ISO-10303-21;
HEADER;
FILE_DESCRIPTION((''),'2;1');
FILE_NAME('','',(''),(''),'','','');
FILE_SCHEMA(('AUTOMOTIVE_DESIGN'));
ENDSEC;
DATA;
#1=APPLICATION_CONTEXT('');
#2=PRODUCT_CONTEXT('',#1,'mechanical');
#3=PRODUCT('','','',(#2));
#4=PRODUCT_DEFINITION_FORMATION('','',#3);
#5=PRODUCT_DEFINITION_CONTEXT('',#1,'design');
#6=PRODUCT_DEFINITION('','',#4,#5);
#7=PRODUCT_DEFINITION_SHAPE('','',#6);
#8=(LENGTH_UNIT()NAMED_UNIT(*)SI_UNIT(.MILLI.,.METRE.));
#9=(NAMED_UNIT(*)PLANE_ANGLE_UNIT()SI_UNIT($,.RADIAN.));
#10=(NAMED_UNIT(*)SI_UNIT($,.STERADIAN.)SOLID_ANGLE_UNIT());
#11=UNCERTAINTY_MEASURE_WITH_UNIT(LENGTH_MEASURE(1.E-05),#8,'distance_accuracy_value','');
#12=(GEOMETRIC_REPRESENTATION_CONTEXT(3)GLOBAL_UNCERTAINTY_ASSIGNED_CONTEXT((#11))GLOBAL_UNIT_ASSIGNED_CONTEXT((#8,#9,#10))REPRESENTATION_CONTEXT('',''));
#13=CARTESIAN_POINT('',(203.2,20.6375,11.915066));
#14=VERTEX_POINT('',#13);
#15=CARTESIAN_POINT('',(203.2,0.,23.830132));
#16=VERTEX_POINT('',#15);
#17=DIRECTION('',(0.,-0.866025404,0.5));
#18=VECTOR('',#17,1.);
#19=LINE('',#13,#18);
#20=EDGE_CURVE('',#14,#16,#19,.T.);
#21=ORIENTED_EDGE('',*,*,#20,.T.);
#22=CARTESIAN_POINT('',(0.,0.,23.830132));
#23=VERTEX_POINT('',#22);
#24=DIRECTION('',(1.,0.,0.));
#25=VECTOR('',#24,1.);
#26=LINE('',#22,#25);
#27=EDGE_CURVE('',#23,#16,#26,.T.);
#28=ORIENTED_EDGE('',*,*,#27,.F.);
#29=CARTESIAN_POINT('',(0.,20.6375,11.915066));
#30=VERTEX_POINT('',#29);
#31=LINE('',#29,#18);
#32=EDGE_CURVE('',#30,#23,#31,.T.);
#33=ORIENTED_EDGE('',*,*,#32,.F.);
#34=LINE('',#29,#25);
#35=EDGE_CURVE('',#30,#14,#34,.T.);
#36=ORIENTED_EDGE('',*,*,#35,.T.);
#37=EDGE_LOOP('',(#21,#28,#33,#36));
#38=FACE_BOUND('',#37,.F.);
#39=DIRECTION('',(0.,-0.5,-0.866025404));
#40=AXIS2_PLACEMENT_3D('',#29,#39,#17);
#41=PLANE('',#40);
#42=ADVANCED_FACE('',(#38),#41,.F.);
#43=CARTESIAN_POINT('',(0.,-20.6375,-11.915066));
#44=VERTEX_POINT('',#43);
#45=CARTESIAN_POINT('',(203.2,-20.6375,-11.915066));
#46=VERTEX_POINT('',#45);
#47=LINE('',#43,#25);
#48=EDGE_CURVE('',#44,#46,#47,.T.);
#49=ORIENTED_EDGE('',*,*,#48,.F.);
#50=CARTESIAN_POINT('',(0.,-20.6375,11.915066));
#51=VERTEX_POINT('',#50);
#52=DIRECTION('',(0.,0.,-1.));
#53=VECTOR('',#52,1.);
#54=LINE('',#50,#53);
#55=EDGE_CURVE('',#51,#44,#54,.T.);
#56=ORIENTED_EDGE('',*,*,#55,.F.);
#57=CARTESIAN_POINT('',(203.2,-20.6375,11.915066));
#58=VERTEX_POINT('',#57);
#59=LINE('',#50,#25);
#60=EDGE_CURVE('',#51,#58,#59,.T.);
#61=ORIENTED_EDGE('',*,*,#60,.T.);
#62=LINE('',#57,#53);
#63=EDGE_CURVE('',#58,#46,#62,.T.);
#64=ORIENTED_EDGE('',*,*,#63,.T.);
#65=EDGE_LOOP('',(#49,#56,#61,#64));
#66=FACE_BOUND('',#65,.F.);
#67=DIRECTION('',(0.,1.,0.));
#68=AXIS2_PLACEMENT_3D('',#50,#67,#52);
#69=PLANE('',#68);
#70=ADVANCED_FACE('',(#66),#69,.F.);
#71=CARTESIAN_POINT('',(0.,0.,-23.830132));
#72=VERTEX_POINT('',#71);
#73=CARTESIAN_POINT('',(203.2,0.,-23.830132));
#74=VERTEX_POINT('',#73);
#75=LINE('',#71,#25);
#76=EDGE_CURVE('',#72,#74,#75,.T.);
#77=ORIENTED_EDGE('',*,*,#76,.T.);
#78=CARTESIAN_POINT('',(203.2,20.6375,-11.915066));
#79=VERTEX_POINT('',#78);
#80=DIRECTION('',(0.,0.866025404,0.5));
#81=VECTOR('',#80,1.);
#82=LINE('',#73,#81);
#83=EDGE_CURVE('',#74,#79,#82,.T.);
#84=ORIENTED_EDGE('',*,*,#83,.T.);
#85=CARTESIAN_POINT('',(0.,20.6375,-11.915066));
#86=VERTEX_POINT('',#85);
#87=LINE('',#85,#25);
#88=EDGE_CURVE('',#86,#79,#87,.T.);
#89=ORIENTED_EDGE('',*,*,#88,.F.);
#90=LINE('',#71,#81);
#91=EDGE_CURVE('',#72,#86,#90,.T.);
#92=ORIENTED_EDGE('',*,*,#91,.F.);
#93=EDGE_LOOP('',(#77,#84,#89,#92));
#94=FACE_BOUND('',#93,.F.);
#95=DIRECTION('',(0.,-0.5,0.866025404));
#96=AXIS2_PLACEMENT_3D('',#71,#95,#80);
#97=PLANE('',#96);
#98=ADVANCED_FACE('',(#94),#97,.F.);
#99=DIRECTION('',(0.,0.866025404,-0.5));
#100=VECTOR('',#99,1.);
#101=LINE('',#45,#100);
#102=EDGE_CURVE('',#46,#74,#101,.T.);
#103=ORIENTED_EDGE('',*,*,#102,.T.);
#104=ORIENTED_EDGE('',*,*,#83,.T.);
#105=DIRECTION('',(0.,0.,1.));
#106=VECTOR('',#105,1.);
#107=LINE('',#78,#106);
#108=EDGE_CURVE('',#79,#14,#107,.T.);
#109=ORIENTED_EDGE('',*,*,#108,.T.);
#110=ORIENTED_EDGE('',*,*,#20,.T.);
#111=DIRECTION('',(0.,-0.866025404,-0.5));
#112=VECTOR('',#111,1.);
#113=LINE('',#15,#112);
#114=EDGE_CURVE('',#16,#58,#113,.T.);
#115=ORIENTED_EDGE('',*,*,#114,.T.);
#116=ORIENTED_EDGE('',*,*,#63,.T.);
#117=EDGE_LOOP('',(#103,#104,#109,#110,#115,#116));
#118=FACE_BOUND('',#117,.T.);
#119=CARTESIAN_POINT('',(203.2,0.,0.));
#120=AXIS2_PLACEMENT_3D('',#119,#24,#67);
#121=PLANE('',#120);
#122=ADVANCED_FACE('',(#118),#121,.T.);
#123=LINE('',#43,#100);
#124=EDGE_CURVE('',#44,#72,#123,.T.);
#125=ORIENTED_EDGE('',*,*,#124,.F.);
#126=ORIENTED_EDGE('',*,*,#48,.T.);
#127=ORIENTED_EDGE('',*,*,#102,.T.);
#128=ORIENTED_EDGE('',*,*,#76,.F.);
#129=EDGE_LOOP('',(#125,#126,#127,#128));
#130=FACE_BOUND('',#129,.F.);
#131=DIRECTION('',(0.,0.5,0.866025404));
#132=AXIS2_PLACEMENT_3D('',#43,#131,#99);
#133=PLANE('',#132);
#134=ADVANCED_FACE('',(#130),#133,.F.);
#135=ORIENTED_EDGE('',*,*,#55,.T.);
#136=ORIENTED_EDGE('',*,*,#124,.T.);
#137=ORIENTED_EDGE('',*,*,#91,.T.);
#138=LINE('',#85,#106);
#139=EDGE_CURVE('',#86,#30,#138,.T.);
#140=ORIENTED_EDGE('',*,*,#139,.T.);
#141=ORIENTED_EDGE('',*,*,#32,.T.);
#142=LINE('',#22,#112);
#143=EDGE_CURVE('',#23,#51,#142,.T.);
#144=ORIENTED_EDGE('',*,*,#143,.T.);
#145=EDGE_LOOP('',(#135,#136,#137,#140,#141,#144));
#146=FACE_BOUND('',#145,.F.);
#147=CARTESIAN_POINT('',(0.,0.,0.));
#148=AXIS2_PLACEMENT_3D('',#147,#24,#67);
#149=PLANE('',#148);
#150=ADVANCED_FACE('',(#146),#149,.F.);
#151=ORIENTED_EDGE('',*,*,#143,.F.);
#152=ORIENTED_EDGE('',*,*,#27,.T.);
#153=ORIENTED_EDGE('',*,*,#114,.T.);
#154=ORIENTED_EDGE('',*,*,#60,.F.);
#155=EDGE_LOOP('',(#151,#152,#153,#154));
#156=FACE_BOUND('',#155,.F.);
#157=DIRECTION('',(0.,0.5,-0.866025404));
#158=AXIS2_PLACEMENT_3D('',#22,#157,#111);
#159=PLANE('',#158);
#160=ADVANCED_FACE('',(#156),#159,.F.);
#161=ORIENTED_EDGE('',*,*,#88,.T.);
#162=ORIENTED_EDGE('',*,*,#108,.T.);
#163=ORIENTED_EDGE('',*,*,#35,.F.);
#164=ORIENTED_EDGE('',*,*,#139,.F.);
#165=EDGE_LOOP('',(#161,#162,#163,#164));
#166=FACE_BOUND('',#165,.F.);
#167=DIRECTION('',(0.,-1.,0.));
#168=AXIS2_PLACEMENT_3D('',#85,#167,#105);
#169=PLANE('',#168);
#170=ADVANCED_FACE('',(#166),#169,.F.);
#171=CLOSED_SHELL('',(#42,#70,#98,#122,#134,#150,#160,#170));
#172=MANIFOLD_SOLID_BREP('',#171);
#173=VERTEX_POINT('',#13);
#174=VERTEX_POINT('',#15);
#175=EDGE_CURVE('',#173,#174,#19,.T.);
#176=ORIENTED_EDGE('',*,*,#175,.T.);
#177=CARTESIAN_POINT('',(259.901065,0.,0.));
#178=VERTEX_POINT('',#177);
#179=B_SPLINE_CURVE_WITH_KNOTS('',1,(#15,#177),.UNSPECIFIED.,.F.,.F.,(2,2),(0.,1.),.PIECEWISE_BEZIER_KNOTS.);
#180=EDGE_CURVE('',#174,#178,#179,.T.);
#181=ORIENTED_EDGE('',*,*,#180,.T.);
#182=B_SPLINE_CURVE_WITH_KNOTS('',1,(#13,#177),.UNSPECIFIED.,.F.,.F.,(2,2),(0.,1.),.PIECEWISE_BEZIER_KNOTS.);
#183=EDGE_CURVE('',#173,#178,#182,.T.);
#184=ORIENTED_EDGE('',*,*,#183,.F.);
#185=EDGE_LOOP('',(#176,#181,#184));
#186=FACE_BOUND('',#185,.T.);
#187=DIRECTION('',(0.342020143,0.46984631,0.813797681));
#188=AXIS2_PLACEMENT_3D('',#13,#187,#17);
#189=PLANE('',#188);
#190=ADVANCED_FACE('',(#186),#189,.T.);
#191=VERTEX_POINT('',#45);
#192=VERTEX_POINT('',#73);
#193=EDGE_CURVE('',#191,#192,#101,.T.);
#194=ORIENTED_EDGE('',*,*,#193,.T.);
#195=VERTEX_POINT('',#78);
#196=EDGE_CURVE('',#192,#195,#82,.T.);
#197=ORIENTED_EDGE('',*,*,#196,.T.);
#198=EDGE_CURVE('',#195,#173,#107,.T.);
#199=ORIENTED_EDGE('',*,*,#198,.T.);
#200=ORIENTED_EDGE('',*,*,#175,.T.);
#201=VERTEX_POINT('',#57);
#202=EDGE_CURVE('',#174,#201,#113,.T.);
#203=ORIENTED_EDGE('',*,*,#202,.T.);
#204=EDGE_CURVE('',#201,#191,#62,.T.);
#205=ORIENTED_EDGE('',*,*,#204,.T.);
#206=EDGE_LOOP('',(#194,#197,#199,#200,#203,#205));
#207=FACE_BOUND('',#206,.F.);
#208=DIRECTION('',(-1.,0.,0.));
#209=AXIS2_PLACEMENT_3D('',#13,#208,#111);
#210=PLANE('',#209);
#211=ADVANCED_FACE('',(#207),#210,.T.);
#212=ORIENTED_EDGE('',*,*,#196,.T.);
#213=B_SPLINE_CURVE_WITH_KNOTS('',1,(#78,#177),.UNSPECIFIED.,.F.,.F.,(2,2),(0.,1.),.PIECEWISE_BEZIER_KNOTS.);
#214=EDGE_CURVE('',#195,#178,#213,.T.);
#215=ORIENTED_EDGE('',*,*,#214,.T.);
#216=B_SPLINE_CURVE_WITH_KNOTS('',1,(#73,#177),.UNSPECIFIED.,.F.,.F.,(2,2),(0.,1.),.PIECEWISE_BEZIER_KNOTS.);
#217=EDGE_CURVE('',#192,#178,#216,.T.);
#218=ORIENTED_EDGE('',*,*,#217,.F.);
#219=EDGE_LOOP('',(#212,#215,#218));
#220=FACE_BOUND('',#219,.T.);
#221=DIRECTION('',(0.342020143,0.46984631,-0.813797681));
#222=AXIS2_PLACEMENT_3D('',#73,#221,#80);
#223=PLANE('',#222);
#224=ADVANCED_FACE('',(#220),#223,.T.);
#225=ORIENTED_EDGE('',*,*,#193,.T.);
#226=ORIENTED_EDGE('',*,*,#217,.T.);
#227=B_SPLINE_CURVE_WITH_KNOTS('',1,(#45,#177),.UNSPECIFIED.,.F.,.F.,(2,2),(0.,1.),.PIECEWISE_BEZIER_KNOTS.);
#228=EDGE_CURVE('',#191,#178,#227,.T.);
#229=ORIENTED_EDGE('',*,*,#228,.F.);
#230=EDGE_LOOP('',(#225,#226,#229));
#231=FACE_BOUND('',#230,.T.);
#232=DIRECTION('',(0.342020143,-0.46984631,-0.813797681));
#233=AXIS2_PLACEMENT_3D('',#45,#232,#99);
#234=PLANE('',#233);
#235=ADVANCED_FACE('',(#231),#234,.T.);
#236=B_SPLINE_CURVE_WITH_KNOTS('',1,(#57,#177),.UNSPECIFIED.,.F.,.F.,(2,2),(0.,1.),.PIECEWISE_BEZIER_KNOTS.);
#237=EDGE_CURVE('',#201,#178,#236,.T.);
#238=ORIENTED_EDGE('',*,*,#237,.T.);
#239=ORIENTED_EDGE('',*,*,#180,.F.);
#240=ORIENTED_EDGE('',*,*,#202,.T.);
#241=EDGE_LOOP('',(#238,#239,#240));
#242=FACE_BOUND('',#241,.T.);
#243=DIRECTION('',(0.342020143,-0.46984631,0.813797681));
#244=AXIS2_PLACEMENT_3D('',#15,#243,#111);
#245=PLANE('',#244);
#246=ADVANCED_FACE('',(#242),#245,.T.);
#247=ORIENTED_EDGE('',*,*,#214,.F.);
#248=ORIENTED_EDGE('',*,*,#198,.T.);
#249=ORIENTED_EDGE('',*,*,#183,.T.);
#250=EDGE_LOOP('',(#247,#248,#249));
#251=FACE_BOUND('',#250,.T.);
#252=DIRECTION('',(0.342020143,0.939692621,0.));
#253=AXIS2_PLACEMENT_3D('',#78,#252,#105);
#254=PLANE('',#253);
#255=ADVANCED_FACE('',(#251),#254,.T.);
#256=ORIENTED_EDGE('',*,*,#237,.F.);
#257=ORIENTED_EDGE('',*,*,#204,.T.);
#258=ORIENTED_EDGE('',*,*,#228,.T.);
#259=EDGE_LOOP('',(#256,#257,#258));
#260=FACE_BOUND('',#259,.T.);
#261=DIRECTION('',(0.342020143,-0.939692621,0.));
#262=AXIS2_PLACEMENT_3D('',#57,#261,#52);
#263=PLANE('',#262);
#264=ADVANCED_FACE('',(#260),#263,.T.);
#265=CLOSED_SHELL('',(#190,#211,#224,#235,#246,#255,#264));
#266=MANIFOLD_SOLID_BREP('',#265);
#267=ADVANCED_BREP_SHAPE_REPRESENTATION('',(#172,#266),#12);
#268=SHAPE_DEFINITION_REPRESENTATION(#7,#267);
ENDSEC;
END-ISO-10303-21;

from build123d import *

# Parameters (mm, degrees)
F1_DEPTH = 203.2


# Not quite as in the source:
# - an extrude whose draft closes it to a point is written as a loft to that point


with BuildPart() as f1:
    # F0 (on Right) → F1 (new body)
    with BuildSketch(Plane.YZ):
        Polygon((20.6375, 11.9150661804), (0, 23.8301323608), (-20.6375, 11.9150661804), (-20.6375, -11.9150661804), (0, -23.8301323608), (20.6375, -11.9150661804), align=None)
    extrude(amount=F1_DEPTH)


with BuildPart() as f3:
    # F2 (on face) → F3 section 0
    with BuildSketch(Plane.YZ.offset(203.2), mode=Mode.PRIVATE) as f3_s0:
        Polygon((20.6375, 11.9150661804), (0, 23.8301323608), (-20.6375, 11.9150661804), (-20.6375, -11.9150661804), (0, -23.8301323608), (20.6375, -11.9150661804), align=None)
    loft([f3_s0.sketch, Vertex(259.901065244, 0, 0)], ruled=True)


solid = Compound([f1.part, f3.part])
